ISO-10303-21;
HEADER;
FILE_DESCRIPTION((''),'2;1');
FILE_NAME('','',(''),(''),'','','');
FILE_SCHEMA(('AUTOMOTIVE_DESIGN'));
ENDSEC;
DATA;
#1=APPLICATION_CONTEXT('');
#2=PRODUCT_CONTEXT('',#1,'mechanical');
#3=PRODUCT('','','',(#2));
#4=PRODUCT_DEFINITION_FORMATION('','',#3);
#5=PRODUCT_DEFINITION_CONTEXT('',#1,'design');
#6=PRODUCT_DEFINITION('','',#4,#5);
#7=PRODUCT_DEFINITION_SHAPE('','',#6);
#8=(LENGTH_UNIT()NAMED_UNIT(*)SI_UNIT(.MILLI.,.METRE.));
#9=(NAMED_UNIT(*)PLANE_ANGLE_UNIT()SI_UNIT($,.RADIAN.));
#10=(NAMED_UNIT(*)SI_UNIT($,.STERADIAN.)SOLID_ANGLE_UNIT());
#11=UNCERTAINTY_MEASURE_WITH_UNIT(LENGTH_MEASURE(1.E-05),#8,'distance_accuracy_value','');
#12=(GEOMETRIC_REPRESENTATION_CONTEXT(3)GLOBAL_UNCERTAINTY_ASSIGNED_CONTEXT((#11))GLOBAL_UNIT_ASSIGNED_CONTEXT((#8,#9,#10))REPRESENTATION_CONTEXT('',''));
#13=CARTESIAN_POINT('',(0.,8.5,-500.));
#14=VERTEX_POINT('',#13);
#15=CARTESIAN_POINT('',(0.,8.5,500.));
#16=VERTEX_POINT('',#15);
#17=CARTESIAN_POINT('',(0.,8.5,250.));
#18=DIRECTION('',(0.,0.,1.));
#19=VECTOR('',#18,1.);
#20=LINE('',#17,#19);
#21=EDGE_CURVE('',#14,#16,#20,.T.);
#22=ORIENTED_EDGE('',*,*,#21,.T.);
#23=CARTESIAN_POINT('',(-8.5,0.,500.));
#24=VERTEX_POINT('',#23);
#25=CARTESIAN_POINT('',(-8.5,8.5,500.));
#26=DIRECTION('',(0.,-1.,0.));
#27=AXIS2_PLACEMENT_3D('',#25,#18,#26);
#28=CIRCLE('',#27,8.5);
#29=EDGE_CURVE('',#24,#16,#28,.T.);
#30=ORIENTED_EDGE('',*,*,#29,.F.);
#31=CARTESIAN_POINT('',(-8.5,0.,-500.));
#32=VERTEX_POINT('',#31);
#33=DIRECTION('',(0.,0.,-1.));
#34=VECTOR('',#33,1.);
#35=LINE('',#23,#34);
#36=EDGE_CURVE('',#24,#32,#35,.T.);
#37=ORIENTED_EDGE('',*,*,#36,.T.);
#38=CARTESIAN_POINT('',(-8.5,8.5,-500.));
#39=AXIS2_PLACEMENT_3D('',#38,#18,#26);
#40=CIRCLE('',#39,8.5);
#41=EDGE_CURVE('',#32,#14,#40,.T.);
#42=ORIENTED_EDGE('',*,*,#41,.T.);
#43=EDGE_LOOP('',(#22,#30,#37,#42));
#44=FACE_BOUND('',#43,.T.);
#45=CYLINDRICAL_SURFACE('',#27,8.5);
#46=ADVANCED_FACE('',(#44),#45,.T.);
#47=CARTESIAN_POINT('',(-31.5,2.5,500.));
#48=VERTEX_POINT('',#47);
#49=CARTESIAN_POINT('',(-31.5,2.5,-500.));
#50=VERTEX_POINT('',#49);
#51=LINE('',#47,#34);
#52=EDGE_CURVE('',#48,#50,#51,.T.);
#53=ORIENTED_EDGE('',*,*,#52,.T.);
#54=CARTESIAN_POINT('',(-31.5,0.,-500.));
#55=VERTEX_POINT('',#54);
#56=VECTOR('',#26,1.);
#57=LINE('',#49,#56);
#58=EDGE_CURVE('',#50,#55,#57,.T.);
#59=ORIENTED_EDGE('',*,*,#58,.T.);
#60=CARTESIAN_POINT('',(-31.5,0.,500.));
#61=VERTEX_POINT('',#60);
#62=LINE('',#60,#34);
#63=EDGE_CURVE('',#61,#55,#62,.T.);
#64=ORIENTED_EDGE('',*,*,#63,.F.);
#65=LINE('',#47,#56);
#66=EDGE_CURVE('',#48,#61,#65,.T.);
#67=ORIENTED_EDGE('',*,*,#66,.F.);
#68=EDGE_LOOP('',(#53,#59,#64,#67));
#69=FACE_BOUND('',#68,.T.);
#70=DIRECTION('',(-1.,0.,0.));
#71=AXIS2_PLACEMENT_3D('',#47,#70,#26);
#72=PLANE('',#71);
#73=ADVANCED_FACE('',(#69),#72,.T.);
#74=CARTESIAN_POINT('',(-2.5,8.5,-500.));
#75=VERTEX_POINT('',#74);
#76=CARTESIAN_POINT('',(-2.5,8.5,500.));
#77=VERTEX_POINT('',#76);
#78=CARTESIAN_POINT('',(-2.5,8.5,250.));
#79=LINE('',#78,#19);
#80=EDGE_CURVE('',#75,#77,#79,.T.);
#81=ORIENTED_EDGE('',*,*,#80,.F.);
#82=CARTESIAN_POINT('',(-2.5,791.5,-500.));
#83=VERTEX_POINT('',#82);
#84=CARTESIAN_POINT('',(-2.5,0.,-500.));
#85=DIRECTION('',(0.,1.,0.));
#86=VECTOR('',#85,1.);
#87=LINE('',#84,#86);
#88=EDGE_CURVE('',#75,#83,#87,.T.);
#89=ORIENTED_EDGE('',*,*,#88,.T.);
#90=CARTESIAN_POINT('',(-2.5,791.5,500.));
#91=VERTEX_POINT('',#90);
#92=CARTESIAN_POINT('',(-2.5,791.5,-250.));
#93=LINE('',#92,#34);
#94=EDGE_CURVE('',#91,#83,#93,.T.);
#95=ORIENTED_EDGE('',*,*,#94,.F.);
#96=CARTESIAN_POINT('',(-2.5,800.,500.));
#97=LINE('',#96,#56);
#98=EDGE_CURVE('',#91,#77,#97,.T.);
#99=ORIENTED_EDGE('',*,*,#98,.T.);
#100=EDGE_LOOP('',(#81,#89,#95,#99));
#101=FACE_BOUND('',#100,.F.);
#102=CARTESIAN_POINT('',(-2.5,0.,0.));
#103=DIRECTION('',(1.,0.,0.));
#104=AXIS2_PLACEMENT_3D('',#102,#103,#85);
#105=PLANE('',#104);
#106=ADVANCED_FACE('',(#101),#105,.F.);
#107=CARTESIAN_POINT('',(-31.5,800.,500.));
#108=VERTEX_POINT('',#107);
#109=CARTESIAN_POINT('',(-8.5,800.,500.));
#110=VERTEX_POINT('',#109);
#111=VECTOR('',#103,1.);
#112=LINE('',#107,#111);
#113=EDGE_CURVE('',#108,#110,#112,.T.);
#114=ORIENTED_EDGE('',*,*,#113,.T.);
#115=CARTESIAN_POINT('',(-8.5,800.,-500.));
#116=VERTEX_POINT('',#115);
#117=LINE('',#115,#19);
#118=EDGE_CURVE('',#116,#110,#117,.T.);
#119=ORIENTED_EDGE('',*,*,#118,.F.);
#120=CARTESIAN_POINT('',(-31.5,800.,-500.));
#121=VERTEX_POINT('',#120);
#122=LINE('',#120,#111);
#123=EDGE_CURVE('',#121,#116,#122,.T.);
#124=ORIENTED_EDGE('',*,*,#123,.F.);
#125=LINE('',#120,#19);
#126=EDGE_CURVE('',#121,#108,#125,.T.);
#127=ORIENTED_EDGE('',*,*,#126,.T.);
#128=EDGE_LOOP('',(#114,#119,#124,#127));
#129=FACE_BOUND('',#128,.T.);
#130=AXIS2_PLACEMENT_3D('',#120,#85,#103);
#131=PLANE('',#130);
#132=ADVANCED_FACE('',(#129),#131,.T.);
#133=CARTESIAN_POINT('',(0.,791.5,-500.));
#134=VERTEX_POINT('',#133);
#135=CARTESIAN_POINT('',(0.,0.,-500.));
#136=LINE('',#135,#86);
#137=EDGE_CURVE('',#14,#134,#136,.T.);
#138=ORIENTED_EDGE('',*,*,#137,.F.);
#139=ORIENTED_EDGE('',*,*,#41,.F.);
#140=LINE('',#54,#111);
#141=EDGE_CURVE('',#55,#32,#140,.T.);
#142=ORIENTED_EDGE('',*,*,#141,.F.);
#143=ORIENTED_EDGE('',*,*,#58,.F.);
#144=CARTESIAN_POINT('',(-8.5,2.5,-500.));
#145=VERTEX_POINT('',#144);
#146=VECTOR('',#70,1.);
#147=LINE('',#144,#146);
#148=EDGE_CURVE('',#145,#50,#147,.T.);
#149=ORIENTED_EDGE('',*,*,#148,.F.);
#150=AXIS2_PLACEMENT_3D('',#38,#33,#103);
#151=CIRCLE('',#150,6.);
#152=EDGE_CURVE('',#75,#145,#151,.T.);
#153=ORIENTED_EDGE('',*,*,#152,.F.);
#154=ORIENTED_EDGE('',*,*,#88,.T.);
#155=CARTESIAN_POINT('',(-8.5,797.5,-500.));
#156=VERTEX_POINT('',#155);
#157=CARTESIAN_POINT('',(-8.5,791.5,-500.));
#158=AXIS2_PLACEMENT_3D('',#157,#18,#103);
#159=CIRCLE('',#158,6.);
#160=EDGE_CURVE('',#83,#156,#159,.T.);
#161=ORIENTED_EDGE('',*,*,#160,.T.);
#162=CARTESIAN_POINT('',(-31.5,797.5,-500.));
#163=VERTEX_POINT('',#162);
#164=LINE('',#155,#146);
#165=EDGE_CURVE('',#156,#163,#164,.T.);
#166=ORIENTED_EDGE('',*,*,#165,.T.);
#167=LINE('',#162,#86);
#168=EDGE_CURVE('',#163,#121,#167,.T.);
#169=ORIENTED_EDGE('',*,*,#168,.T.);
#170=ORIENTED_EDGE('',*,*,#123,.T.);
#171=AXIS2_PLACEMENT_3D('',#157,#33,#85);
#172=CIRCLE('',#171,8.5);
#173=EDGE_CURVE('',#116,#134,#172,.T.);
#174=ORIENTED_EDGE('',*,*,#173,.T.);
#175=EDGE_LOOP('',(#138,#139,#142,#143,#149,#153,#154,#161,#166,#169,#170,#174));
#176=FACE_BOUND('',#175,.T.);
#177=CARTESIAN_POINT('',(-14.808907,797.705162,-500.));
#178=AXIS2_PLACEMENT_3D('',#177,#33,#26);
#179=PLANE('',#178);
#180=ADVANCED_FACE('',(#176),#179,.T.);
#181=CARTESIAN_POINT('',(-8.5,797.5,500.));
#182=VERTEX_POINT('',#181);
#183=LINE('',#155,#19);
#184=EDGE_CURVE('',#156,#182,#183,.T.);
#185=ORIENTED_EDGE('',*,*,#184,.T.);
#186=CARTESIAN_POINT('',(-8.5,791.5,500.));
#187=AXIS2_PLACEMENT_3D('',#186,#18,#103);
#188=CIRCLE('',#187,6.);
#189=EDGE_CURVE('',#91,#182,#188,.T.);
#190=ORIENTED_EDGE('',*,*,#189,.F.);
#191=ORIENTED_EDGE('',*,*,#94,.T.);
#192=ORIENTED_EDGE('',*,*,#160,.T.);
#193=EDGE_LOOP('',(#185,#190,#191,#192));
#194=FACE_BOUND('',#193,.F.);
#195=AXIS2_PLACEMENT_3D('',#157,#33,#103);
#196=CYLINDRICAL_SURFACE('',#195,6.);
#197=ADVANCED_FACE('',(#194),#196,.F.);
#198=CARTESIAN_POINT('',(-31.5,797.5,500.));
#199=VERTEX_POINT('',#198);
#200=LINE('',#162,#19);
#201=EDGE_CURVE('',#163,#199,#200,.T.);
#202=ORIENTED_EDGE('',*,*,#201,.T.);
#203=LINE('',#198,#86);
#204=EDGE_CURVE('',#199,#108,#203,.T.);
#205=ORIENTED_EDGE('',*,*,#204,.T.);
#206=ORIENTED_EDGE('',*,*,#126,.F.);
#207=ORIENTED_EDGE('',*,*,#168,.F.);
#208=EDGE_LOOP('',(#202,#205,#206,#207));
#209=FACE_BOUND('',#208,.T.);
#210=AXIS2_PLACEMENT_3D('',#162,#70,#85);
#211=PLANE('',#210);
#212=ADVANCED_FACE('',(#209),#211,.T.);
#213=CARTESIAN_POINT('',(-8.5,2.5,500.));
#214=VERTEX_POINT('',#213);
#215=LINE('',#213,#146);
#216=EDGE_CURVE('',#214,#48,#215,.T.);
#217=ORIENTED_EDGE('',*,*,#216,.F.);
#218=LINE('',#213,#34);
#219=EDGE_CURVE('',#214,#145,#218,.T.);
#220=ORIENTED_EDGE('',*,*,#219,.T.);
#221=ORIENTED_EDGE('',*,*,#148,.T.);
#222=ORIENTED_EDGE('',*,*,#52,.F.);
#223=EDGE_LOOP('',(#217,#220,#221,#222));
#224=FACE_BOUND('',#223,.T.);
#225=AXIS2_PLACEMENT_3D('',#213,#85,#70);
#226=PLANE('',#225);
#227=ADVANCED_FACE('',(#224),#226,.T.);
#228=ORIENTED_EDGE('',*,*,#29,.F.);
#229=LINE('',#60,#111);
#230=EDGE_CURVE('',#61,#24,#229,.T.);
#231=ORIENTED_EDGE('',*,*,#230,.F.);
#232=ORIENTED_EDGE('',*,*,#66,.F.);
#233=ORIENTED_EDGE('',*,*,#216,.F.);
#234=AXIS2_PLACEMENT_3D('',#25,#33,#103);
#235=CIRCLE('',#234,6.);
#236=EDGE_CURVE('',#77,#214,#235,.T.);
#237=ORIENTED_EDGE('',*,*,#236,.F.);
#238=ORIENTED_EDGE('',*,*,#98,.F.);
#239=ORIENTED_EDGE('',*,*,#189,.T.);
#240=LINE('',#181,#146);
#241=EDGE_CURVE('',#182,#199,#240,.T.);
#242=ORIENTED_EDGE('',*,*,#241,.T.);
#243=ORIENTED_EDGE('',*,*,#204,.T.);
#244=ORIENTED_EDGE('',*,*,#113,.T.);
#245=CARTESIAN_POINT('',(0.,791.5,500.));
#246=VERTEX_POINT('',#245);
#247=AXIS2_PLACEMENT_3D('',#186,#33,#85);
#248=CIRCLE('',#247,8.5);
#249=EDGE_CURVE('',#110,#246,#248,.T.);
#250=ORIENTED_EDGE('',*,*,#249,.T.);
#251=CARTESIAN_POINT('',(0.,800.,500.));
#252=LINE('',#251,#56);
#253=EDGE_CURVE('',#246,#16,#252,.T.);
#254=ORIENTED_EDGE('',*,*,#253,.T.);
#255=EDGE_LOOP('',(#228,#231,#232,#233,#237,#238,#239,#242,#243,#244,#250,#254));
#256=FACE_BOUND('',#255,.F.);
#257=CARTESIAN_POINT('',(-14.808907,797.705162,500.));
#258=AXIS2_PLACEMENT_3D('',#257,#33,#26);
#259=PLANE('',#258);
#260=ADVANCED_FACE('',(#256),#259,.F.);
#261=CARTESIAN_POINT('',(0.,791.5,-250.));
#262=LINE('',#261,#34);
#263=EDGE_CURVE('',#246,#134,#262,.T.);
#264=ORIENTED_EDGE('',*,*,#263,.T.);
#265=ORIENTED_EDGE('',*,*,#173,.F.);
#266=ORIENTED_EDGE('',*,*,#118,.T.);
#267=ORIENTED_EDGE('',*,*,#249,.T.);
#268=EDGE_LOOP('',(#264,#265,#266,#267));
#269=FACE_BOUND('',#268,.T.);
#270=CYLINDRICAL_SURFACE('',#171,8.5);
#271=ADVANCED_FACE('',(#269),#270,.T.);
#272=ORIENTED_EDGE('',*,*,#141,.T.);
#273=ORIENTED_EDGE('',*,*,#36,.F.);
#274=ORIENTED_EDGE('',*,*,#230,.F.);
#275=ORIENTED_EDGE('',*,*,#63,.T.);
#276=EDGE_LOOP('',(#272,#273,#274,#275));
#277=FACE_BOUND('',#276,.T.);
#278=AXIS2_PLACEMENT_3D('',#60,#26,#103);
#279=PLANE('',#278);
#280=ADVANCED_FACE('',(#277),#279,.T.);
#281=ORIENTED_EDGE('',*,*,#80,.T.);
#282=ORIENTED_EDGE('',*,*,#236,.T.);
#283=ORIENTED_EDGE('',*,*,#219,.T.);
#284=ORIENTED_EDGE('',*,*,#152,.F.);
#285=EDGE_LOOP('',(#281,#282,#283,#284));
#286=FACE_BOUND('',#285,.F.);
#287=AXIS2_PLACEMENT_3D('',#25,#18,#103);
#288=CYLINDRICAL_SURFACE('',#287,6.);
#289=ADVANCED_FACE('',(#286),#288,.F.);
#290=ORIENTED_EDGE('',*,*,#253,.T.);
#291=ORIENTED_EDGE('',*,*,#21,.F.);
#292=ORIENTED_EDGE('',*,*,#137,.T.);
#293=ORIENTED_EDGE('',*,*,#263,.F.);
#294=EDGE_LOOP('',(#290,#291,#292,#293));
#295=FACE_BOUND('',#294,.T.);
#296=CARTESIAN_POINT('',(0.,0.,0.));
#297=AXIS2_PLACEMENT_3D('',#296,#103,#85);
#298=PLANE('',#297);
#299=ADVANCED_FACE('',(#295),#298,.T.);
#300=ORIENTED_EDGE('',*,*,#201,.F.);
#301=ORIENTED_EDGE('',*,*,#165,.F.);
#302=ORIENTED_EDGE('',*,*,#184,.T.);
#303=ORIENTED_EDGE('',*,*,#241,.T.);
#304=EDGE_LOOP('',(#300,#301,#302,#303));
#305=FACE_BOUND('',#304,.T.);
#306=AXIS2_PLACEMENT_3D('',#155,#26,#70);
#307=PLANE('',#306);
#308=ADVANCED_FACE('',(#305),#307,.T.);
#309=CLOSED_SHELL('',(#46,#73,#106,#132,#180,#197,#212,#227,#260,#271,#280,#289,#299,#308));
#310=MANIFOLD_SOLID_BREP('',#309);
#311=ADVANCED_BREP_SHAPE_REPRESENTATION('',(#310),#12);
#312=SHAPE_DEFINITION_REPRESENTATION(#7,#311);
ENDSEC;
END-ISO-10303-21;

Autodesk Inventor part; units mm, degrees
ref_plane "YZ Plane" through (0, 0, 0) normal (1, 0, 0) x (0, 1, 0)
ref_plane "XZ Plane" through (0, 0, 0) normal (0, 1, 0) x (-1, 0, 0)
ref_plane "XY Plane" through (0, 0, 0) normal (0, 0, 1) x (1, 0, 0)
sketch "Náčrt2" plane through (0, 0, 0) normal (1, 0, 0) x (0, 1, 0)
  line L0 (800, 500) -> (0, 500)
  line L1 (0, 500) -> (0, -500)
  line L2 (0, -500) -> (800, -500)
  line L3 (800, -500) -> (800, 500)
  point P0 (0, 0)
  point P1 (0, 0)
  dimension "d0" = 1000
  dimension "d1" = 800
extrude "Vysunutí1" add sketch "Náčrt2" against normal blind 2.5
sketch "Náčrt3" plane through (0, 797.5, -500) normal (0, 1, 0) x (-1, 0, 0)
  line L0 (0, 1000) -> (0, 0)
  line L1 (0, 0) -> (31.5, 0)
  line L2 (31.5, 0) -> (31.5, 1000)
  line L3 (31.5, 1000) -> (0, 1000)
edge flange "Obruba1" height 31.5 angle 90 thickness 2.5 bend radius 6 thickness toward (0, 1, 0) relief tear relief width 2.5 relief depth 1.25 corner gap 2.5 corner form 0 edges at (-2.5, 800, 0) (-2.5, 0, 0) wall of the first edge with corners at (0, 797.5, 500) (0, 797.5, -500) (-31.5, 797.5, -500) (-31.5, 797.5, 500)
bend "Ohyb1"
corner "Roh1"
equation "\"d4\" = ŠířkaVýštipu"
equation "\"d5\" = HloubkaVýštipu"
equation "\"d6\" = MinimálníZbytek"
equation "\"d7\" = PoloměrOhybu"
equation "\"d11\" = VelikostRohovéhoVýštipu"
equation "\"d12\" = VelikostMezery"
equation "\"d13\" = VelikostJacobihoPoloměru"
equation "\"PoloměrOhybu\" = Tloušťka"
equation "\"ŠířkaVýštipu\" = Tloušťka"
equation "\"HloubkaVýštipu\" = 0.5 * Tloušťka"
equation "\"MinimálníZbytek\" = 2 * Tloušťka"
equation "\"PřechodovýPoloměr\" = PoloměrOhybu"
equation "\"VelikostJacobihoPoloměru\" = PoloměrOhybu"
equation "\"VelikostMezery\" = Tloušťka"
equation "\"VelikostRohovéhoVýštipu\" = 10"
equation "\"Tloušťka\" = 2.5"
properties part number "DD_KVD_002_01" material "Nerezová ocel"
